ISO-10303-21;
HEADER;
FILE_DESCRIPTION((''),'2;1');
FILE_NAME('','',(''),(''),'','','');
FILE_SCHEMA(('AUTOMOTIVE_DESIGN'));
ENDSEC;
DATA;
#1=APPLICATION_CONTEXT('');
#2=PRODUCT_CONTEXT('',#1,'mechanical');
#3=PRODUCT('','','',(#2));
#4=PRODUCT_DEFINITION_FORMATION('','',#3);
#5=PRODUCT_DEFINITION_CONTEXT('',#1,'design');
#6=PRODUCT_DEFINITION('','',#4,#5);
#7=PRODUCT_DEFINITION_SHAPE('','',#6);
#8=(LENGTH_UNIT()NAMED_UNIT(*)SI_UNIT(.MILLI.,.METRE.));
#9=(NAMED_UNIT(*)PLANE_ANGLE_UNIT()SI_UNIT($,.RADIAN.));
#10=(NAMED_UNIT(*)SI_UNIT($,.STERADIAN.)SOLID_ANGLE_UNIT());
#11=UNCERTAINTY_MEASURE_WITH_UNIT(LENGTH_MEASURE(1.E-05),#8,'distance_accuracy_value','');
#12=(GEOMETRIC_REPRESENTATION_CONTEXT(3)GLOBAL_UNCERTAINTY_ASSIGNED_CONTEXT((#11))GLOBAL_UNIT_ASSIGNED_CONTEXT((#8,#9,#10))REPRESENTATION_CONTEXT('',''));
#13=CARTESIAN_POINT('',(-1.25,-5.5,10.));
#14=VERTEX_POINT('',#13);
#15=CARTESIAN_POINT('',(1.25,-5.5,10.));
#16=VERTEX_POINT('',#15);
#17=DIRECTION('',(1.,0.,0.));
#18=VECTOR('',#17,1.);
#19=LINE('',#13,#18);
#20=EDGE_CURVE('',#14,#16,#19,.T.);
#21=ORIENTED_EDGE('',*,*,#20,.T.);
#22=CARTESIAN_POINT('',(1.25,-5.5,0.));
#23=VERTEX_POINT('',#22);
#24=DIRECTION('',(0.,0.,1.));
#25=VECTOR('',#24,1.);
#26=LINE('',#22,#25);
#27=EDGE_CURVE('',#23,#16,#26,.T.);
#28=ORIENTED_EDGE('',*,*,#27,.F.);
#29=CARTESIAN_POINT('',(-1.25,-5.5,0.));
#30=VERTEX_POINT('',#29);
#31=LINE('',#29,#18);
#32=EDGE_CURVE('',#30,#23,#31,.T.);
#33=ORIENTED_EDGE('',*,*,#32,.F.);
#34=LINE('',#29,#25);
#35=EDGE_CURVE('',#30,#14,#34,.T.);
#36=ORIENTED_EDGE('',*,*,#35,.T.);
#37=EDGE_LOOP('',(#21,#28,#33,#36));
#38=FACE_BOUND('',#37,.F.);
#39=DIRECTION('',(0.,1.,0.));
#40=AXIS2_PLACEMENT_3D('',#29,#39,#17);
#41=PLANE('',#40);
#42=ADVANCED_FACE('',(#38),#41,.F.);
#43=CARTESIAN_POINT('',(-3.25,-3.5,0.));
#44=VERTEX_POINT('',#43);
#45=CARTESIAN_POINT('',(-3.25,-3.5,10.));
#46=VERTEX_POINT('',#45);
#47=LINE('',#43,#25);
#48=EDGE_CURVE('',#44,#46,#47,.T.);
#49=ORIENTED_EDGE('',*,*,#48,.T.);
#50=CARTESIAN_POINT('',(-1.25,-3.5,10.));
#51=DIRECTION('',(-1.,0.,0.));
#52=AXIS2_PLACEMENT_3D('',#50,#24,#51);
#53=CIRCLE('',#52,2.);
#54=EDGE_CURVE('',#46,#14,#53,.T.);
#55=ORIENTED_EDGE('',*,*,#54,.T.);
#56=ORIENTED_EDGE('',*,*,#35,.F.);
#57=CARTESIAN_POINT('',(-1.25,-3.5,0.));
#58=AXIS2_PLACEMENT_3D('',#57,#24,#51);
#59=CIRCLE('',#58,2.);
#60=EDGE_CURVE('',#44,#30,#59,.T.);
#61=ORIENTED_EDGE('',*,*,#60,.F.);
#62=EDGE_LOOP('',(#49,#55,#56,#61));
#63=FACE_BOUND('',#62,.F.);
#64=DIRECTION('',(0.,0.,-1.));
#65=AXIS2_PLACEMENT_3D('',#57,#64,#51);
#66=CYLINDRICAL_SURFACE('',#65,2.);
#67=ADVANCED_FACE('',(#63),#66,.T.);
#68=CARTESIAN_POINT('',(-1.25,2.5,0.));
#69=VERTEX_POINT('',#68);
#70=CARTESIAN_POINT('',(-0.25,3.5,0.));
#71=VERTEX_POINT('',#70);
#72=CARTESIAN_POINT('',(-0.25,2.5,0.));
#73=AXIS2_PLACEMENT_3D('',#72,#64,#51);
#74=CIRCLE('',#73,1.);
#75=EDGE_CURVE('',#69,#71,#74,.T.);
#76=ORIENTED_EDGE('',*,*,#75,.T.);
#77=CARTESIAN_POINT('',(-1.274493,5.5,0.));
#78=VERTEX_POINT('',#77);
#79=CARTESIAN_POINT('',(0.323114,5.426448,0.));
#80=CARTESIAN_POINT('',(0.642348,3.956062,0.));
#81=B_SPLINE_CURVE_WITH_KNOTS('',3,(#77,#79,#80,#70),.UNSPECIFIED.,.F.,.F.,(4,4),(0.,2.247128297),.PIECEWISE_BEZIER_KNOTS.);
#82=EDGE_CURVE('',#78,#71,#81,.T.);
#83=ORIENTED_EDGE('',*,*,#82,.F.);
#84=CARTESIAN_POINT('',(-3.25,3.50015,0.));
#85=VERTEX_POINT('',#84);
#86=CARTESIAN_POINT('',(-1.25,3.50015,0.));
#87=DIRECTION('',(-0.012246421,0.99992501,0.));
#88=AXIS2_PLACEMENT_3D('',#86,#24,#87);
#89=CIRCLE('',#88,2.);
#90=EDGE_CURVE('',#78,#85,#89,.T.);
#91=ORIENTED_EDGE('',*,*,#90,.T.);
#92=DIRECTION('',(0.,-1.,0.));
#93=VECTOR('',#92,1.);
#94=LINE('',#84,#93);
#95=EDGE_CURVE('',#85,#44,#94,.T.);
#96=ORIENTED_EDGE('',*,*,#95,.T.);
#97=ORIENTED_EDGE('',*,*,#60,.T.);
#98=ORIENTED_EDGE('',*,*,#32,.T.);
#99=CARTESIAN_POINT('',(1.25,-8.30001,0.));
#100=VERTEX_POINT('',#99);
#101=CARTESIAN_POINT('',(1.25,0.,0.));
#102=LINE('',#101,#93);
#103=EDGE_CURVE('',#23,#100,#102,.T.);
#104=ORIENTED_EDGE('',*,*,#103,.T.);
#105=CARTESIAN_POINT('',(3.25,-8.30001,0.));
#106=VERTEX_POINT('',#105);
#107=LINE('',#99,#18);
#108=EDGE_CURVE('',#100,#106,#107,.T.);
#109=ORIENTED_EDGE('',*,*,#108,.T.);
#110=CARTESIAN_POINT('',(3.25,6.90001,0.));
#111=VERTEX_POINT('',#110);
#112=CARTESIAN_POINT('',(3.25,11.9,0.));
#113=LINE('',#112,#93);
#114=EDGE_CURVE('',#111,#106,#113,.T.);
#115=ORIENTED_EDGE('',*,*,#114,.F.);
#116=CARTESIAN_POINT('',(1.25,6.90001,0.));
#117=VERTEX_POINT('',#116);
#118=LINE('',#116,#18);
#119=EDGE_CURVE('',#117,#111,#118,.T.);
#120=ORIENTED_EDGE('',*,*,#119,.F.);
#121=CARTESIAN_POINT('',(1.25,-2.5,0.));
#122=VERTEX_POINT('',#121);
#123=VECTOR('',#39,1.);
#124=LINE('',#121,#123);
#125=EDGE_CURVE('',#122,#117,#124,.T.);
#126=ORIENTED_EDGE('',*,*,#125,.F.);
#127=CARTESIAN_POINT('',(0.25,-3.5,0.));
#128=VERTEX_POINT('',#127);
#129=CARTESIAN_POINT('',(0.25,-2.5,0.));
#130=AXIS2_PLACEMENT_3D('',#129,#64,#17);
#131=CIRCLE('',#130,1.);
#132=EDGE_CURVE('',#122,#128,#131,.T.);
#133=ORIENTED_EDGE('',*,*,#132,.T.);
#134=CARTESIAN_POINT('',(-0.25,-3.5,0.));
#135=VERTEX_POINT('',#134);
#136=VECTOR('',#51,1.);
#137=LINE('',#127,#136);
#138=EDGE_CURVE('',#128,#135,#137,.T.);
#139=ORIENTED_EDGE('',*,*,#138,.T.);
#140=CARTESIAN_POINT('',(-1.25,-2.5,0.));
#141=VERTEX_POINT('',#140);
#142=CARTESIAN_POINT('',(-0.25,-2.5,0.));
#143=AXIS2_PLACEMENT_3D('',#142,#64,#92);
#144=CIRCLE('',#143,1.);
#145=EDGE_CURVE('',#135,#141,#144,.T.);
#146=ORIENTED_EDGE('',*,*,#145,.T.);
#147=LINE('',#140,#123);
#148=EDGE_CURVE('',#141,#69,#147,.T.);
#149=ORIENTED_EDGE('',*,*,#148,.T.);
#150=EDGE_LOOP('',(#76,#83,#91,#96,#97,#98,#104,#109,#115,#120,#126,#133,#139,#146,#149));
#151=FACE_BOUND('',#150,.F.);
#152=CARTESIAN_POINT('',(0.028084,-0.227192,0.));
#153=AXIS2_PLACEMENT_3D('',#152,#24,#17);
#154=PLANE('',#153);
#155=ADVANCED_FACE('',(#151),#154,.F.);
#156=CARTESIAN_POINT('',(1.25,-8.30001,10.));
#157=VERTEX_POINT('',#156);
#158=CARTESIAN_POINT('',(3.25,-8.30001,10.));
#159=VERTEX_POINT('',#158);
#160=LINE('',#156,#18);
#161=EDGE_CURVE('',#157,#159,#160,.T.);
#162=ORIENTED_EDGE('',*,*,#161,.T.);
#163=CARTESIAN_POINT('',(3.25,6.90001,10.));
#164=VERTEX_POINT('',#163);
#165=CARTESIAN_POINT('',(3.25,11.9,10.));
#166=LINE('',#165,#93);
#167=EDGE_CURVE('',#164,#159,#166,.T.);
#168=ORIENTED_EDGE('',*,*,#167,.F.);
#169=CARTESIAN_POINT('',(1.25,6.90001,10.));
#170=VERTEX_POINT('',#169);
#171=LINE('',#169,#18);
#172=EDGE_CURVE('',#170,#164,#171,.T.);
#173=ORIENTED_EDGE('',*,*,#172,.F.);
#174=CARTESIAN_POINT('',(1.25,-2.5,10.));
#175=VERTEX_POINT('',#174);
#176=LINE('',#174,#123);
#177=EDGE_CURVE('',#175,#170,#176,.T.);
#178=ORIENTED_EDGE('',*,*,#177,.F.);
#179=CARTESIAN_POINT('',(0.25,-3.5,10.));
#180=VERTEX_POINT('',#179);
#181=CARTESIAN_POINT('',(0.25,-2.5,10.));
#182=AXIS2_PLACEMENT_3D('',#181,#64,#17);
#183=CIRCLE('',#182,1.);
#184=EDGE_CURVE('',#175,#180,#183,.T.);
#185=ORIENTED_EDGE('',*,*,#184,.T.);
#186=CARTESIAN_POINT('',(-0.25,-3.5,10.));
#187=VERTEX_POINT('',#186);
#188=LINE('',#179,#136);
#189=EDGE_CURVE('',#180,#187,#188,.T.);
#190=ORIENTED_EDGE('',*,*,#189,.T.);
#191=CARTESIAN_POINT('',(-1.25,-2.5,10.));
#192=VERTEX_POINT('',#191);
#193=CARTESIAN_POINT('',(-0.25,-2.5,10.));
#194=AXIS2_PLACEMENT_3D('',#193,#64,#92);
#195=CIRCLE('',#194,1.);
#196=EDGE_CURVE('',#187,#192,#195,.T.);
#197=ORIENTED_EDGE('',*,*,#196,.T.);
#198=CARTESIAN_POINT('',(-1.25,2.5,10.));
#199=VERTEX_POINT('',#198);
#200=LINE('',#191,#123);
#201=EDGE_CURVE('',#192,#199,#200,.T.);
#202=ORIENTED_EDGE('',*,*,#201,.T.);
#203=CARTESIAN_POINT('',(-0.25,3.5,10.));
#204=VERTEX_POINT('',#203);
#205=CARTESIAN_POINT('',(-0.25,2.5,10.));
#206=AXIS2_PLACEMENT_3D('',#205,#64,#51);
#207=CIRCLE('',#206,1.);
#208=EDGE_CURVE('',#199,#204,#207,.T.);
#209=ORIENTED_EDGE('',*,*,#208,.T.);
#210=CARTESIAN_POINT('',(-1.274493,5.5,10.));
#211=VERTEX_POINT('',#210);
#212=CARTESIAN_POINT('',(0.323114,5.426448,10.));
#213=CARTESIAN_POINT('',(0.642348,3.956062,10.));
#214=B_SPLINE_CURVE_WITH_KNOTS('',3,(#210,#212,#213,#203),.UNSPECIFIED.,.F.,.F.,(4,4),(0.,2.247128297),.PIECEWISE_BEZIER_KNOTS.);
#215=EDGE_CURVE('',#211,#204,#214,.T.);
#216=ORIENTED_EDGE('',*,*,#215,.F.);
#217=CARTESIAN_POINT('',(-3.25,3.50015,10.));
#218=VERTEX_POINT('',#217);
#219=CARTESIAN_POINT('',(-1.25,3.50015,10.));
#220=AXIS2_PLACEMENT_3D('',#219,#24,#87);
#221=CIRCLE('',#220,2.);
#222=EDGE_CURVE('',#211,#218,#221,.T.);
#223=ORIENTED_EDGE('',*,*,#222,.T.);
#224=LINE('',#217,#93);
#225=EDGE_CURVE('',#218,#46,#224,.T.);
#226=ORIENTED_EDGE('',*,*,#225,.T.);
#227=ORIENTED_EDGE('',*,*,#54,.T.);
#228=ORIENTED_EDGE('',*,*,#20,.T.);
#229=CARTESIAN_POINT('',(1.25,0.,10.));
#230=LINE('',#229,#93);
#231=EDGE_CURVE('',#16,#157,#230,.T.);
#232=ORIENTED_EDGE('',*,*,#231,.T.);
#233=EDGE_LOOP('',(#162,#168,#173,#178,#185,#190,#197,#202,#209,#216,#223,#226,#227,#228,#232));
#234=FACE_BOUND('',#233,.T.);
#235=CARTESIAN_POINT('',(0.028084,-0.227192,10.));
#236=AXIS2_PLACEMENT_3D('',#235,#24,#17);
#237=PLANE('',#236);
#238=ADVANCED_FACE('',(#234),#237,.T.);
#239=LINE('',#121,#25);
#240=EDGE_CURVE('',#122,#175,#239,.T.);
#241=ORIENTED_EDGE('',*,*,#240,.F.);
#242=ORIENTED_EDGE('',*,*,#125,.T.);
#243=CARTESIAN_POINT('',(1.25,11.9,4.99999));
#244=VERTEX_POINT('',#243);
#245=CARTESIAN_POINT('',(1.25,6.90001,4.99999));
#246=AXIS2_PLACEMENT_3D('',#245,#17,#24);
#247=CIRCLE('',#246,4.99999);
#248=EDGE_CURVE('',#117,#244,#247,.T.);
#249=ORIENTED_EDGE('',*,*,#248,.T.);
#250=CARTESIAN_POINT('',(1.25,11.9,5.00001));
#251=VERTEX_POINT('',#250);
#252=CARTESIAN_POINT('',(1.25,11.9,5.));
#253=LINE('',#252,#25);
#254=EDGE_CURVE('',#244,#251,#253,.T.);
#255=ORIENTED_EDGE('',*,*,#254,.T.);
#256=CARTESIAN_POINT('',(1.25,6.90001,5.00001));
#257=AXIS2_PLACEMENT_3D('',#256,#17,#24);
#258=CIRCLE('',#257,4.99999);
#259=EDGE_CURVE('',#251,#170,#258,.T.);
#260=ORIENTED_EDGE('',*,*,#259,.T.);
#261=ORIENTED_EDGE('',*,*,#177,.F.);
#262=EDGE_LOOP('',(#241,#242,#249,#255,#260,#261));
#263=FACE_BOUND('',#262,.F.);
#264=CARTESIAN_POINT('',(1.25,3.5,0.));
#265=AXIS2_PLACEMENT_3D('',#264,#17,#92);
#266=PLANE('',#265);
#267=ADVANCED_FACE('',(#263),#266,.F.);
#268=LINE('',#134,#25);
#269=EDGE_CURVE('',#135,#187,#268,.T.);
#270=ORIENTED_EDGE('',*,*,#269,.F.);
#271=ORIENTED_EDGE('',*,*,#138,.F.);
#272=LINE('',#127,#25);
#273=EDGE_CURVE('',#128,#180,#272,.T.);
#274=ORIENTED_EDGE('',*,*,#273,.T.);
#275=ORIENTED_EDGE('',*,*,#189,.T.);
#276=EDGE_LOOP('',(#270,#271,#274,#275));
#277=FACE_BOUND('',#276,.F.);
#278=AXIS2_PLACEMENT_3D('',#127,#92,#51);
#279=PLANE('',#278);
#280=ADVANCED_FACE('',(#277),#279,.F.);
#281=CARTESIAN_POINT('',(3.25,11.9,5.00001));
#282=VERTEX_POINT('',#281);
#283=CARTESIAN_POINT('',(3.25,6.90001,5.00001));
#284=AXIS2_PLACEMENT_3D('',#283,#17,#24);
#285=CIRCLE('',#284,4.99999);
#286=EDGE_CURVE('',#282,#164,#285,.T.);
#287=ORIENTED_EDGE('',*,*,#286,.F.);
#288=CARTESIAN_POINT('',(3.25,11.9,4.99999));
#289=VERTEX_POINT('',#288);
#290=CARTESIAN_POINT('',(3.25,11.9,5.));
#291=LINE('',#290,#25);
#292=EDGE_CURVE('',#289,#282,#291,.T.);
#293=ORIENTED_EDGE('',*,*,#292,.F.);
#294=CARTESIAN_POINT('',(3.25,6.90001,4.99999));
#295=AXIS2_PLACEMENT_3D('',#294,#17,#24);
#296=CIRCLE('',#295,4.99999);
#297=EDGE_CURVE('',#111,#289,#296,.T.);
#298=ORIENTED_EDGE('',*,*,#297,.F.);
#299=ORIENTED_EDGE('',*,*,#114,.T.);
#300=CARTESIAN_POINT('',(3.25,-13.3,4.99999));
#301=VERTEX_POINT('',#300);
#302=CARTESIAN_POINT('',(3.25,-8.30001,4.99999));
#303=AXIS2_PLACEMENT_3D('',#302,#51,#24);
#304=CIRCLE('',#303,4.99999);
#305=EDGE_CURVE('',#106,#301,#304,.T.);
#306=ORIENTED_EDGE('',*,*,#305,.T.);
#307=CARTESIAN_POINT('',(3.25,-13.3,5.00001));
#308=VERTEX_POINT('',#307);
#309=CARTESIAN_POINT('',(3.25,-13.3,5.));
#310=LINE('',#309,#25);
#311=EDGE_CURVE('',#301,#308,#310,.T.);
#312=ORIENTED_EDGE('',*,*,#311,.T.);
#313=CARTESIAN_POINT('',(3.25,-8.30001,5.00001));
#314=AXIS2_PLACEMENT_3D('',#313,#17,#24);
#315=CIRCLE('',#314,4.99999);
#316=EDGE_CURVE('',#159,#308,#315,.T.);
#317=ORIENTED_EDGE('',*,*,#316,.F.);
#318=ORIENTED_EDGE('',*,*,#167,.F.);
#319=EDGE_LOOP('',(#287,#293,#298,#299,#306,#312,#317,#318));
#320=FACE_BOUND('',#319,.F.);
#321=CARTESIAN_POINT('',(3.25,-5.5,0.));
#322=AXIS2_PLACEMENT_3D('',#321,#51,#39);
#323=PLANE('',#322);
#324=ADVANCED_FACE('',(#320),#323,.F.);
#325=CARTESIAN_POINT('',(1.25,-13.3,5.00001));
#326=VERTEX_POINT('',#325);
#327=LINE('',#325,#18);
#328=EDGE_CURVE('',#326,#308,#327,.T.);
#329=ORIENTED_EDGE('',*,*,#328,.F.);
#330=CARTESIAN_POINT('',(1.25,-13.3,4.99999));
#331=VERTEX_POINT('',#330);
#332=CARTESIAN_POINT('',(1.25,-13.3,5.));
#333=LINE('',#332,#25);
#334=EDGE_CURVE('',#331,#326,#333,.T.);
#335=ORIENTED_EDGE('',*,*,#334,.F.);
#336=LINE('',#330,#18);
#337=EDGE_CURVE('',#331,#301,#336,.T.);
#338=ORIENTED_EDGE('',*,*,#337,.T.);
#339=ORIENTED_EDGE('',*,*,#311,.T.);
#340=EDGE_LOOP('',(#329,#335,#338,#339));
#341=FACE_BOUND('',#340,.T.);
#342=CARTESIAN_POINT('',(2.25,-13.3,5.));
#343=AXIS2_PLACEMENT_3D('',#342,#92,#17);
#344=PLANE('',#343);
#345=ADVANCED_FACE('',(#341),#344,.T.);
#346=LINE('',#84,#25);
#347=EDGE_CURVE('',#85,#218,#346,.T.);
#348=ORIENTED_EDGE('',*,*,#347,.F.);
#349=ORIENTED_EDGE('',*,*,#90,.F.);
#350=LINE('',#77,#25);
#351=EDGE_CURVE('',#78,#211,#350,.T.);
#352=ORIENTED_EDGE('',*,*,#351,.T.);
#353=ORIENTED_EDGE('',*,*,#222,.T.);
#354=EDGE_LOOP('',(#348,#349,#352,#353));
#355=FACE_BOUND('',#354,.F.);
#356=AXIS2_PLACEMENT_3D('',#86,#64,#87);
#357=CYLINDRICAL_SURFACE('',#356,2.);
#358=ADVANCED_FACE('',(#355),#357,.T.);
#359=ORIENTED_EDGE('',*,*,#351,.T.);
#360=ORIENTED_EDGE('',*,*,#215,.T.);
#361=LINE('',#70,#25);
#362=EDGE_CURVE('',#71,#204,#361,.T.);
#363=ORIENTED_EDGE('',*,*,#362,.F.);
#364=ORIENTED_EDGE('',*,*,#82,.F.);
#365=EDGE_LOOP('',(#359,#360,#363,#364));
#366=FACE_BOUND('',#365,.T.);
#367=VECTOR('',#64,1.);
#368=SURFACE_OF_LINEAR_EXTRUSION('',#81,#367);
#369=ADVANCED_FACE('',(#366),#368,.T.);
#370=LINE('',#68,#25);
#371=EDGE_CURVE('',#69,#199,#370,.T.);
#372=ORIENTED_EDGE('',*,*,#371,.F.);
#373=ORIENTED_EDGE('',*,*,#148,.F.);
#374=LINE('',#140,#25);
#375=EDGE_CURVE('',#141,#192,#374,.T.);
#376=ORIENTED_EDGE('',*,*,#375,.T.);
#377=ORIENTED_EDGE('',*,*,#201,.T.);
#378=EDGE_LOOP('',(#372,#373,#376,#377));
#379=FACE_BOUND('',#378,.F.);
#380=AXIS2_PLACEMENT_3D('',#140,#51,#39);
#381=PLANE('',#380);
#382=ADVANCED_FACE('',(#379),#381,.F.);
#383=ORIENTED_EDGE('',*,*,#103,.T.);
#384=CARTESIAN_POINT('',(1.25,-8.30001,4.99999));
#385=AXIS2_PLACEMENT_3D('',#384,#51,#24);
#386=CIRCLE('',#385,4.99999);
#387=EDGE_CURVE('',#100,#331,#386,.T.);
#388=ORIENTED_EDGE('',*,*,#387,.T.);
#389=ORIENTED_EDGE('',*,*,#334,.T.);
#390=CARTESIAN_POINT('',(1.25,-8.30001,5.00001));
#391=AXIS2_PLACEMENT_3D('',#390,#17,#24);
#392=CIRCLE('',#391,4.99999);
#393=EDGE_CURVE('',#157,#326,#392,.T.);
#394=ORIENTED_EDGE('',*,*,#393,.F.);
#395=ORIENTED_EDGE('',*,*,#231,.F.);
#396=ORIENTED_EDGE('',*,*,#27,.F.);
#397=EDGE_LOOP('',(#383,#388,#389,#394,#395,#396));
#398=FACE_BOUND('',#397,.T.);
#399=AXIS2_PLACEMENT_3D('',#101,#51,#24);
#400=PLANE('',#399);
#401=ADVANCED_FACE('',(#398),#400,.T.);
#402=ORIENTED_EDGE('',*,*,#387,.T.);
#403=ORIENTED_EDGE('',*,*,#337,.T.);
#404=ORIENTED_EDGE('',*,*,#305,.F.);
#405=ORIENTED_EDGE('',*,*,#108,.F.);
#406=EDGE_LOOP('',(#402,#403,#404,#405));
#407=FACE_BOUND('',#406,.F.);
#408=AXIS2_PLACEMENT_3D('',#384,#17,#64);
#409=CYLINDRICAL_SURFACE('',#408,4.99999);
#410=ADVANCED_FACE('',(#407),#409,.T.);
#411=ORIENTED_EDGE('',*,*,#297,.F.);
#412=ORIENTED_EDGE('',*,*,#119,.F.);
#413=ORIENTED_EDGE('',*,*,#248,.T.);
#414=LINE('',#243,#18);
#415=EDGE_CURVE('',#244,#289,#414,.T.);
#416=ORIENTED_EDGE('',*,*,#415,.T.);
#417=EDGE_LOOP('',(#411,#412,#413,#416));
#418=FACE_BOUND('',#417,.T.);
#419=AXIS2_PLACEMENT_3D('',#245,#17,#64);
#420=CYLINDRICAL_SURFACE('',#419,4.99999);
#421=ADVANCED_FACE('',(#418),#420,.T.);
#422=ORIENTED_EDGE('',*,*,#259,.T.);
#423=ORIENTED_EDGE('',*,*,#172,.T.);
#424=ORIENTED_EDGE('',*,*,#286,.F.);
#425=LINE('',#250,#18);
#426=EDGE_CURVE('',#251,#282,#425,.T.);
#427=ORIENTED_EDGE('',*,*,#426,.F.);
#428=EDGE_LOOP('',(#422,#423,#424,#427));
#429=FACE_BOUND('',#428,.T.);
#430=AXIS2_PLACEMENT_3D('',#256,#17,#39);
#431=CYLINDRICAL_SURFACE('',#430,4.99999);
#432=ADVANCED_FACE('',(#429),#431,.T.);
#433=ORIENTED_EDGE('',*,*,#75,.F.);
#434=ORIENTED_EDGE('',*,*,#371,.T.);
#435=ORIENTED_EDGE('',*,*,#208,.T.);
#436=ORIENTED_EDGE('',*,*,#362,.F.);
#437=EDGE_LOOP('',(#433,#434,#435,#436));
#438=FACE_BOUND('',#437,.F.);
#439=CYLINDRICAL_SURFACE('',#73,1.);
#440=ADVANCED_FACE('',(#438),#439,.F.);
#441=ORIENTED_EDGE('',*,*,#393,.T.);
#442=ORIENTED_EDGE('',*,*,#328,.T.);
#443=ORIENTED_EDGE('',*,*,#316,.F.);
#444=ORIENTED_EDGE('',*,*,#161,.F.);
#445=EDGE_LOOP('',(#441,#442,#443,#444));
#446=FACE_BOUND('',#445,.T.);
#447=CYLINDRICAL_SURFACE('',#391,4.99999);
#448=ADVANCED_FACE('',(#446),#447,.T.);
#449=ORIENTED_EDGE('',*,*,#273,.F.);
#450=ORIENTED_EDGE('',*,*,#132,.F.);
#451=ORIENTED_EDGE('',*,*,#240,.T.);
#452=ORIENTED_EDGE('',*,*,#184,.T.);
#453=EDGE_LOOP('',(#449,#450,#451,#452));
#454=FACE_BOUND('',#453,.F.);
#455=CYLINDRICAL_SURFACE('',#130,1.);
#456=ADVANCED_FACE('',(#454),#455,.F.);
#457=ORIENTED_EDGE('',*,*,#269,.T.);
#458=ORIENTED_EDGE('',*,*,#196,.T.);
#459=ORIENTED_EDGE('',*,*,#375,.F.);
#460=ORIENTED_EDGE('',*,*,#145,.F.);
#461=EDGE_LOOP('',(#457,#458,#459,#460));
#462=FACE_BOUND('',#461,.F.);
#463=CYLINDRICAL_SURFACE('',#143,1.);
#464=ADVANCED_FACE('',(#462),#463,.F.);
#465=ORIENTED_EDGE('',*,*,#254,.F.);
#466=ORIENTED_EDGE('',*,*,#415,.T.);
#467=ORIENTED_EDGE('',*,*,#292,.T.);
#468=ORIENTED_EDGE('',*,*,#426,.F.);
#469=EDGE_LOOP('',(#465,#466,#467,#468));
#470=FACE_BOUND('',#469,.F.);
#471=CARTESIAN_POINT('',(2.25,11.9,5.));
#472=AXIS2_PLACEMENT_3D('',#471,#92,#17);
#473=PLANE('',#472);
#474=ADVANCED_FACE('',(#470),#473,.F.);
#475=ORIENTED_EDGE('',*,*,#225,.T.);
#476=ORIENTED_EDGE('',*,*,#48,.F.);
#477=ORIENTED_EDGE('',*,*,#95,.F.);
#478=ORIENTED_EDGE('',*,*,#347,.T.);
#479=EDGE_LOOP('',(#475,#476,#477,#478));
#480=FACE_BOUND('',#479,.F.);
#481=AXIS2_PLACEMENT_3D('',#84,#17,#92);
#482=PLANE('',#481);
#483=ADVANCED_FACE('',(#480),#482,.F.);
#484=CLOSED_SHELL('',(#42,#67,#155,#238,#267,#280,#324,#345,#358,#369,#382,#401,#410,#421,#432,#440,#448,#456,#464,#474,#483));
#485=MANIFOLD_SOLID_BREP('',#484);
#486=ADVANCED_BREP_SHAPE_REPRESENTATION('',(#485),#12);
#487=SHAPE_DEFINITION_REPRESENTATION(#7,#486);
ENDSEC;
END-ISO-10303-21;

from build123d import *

# Parameters (mm, degrees)
F1_DEPTH      = 10
F2_W          = 2
F2_H          = 10
F3_DEPTH      = 13.3
F3_DEPTH_BACK = 11.9
F4_R          = 4.99999


# Not quite as in the source:
# - a fillet or chamfer is up to 0.001 mm smaller than in the source, because OpenCascade refuses the exact size


with BuildPart() as f1:
    # F0 (on Top) → F1 (new body)
    with BuildSketch(Plane.XY):
        with BuildLine():
            Line((-1.25, -5.5), (3.25, -5.5))
            Line((3.25, -5.5), (3.25, 3.499999999))
            ThreePointArc((3.25, 3.499999999), (2.2500000005, 4.499999999), (1.25, 3.5))
            Line((1.25, 3.5), (1.25, -2.5))
            ThreePointArc((1.25, -2.5), (0.9571067812, -3.2071067812), (0.25, -3.5))
            Line((0.25, -3.5), (-0.25, -3.5))
            ThreePointArc((-0.25, -3.5), (-0.9571067812, -3.2071067812), (-1.25, -2.5))
            Line((-1.25, -2.5), (-1.25, 2.5))
            ThreePointArc((-1.25, 2.5), (-0.9571067812, 3.2071067812), (-0.25, 3.5))
            add(Edge.make_bspline(
                [(-1.2744928417, 5.5), (0.3231141309, 5.4264482222), (0.6423479063, 3.9560622536), (-0.25, 3.5)],
                knots=[0, 0, 0, 0, 2.2471282969, 2.2471282969, 2.2471282969, 2.2471282969], degree=3))
            ThreePointArc((-1.2744928417, 5.5), (-2.6728467387, 4.9056773399), (-3.25, 3.5001499804))
            Line((-3.25, 3.5001499804), (-3.25, -3.5))
            ThreePointArc((-3.25, -3.5), (-2.6642135624, -4.9142135624), (-1.25, -5.5))
        make_face()
    extrude(amount=F1_DEPTH)

    # F2 (on Front) → F3 (join, two sides)
    with BuildSketch(Plane.XZ) as f3_sk:
        with Locations((2.25, 5)):
            Rectangle(F2_W, F2_H)
    extrude(amount=F3_DEPTH)
    extrude(f3_sk.sketch, amount=-F3_DEPTH_BACK)

    # F4 (radius 5 in the source; OpenCascade refuses exactly that, so slightly less here)
    f4_edges = [f1.edges().sort_by_distance(p)[0] for p in [
        (2.25, -13.3, 10),
        (2.25, 11.9, 10),
        (2.25, -13.3, 0),
        (2.25, 11.9, 0),
    ]]
    fillet(f4_edges, radius=F4_R)


solid = f1.part
